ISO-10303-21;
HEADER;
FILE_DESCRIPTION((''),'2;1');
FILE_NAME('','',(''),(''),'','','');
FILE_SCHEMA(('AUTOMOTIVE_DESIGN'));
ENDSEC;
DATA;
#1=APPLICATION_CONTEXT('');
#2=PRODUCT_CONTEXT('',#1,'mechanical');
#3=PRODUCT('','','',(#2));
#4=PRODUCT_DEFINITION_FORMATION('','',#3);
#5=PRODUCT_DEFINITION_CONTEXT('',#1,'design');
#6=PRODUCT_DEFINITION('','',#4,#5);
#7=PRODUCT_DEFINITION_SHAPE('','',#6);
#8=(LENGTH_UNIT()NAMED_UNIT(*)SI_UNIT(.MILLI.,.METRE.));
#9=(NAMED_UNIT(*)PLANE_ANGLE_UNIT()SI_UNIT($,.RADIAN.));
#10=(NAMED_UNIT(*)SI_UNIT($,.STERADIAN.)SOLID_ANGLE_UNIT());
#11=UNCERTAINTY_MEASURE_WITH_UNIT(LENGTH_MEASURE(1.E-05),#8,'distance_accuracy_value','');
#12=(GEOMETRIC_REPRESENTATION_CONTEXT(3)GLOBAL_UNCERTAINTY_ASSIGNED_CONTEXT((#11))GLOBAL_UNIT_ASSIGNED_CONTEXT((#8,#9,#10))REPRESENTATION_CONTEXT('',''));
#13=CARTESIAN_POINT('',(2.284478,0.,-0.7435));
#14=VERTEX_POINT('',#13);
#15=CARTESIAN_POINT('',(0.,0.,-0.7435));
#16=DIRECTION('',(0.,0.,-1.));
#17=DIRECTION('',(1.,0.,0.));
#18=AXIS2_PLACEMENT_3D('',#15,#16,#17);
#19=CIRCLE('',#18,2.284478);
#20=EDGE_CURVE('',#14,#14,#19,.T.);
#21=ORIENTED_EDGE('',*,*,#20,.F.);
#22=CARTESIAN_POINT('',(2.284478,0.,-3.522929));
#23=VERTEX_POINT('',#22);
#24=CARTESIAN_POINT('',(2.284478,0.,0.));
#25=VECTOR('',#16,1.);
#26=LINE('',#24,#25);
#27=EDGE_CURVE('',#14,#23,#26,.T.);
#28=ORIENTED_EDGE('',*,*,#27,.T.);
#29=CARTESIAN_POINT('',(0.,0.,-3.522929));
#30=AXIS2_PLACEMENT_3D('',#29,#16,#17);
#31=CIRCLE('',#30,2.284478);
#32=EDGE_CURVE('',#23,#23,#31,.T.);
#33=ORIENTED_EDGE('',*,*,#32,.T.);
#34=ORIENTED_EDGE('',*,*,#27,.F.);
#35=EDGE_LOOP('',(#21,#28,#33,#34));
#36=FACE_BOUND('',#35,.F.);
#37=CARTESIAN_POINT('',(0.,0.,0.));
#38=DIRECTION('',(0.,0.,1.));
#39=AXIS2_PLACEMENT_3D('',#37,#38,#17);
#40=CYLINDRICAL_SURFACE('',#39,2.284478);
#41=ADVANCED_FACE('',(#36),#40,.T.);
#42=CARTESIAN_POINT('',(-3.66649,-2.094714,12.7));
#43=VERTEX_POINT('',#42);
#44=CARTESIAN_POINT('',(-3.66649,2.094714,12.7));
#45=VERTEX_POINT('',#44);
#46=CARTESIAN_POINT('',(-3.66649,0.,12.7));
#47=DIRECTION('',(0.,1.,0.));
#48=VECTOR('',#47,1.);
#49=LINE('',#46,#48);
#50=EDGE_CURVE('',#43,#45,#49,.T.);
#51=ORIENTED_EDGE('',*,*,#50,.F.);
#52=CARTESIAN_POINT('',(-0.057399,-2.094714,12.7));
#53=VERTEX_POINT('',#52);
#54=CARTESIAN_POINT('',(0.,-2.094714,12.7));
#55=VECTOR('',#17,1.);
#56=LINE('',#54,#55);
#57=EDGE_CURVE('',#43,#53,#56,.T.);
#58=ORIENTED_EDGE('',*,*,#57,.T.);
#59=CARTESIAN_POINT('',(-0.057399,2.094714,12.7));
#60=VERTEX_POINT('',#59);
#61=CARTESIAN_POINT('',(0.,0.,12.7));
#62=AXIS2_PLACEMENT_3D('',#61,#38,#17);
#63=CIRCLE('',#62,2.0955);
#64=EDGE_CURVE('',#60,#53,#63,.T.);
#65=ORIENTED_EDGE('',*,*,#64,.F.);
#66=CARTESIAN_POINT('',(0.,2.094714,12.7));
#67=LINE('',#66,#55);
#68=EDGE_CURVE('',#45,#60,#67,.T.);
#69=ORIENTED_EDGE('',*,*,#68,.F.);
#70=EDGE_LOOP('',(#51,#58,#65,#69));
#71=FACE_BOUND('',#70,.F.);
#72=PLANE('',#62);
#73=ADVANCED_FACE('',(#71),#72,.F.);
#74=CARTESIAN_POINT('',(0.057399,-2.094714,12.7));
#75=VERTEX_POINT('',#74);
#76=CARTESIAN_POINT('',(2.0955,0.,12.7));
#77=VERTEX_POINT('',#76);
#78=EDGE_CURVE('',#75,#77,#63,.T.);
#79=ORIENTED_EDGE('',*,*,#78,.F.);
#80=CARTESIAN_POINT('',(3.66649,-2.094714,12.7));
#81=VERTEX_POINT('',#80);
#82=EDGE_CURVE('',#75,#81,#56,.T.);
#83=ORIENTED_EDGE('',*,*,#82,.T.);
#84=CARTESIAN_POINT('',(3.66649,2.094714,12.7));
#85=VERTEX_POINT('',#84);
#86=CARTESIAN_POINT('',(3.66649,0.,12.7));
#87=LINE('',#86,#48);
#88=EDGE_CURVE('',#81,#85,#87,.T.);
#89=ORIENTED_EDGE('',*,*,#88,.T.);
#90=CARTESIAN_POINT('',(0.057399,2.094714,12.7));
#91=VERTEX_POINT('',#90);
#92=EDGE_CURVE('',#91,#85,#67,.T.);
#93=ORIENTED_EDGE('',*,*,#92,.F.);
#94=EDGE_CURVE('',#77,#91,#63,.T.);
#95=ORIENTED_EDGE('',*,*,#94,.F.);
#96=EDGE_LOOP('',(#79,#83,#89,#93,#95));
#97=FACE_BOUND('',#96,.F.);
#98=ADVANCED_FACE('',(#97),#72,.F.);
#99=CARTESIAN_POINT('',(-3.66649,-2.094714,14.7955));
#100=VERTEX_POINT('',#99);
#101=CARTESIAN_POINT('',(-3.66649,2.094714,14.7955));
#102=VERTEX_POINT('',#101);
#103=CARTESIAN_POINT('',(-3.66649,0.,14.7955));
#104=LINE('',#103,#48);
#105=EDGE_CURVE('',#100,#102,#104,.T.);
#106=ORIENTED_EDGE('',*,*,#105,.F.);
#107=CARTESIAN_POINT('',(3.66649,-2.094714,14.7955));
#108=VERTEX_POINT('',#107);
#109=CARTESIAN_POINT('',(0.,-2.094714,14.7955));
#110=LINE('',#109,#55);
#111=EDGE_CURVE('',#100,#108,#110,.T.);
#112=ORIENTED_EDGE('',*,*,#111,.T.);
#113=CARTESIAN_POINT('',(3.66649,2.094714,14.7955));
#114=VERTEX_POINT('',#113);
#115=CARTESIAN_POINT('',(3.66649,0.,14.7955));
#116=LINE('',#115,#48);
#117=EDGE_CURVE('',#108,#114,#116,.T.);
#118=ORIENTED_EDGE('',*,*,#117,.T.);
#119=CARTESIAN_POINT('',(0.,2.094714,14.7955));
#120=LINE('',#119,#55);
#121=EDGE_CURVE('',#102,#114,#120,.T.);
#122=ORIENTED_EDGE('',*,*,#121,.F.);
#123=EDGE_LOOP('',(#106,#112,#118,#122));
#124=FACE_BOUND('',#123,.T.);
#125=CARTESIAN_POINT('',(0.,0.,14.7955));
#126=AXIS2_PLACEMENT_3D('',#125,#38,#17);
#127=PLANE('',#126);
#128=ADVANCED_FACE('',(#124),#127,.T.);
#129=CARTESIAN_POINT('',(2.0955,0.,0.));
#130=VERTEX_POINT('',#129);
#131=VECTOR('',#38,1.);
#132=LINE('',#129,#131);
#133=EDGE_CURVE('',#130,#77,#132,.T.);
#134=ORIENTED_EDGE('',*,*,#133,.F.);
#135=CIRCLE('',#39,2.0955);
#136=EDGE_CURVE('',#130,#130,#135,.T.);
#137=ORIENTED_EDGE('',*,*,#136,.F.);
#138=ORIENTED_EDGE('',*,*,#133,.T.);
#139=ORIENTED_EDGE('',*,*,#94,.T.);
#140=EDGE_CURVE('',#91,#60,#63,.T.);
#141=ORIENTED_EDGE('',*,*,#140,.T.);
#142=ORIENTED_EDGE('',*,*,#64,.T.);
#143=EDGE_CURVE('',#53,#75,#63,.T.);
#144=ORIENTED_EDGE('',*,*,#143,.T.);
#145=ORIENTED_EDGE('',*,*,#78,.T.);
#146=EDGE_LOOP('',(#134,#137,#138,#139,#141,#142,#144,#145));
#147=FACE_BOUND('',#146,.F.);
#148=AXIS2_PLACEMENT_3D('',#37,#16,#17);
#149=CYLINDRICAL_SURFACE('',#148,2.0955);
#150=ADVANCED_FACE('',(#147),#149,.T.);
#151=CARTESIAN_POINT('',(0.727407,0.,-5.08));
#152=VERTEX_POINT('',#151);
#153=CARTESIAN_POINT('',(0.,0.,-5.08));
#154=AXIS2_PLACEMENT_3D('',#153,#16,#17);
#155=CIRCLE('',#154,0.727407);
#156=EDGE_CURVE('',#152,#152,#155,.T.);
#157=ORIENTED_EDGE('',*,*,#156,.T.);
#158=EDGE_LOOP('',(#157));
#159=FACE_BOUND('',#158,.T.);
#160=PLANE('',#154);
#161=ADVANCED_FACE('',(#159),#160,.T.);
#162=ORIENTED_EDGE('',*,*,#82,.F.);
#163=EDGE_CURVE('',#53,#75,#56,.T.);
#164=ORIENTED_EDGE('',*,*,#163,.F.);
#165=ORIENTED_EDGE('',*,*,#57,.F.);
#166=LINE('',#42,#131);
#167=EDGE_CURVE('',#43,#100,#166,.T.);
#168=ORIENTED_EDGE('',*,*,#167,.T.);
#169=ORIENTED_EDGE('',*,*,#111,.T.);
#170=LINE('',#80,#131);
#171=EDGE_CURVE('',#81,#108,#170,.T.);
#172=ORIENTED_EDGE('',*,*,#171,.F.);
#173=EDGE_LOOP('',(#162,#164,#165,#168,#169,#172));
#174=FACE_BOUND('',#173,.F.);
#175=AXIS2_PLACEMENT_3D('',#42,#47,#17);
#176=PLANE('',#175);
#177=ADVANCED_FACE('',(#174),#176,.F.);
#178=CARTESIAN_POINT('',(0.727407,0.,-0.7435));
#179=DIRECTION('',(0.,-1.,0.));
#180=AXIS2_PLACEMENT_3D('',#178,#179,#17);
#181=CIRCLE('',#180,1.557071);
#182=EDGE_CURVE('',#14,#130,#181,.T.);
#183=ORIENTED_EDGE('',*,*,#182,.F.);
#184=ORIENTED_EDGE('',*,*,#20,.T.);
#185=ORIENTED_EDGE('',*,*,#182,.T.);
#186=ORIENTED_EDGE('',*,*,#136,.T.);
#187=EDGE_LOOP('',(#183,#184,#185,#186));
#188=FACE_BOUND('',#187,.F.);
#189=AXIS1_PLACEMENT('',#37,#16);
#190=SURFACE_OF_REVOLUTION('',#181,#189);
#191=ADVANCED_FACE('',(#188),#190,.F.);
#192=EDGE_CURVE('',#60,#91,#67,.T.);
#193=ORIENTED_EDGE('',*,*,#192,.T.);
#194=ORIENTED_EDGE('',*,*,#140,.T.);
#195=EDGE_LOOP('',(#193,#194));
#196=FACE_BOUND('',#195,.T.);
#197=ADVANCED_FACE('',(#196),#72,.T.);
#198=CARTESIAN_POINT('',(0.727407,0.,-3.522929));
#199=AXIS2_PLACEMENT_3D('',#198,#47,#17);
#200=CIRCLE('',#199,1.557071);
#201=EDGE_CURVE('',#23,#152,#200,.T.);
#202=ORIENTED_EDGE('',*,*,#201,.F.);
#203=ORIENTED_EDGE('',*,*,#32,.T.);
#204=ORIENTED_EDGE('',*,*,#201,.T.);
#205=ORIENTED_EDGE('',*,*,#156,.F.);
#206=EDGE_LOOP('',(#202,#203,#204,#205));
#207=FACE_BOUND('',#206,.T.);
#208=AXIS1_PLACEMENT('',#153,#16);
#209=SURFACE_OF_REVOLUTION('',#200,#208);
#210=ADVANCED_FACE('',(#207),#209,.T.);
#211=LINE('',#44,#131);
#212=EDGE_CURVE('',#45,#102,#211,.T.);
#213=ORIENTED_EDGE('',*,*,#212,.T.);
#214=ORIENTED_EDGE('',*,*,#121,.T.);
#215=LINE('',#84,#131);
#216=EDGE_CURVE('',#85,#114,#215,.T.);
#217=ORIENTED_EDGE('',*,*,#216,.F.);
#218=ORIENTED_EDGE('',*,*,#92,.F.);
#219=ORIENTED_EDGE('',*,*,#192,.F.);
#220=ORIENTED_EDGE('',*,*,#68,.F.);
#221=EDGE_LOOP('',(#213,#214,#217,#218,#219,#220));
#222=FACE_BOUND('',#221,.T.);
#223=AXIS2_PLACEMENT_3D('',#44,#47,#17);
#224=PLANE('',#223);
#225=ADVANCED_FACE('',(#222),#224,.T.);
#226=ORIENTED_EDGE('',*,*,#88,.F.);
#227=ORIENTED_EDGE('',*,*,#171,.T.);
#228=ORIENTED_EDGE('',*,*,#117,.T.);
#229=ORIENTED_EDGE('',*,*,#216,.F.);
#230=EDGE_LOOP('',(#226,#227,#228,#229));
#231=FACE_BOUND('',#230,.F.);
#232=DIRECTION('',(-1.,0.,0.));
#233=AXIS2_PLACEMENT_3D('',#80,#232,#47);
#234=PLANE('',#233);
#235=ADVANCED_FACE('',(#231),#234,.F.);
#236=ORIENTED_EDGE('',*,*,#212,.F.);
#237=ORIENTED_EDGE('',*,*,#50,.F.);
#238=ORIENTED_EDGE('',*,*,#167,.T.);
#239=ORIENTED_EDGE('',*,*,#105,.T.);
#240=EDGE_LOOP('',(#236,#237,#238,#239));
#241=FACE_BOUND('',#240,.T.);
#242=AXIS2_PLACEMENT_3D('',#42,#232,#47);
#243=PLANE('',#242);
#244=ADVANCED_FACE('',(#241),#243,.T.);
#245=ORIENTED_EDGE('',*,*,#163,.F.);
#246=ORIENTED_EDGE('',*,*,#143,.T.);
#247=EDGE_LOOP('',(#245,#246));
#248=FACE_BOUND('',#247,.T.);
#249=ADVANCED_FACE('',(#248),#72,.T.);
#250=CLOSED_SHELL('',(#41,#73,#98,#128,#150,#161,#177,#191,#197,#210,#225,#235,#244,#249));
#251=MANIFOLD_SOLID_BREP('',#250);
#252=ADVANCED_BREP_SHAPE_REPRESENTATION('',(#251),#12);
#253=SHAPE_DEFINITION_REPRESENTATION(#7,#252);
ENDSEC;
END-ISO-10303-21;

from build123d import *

# Parameters (mm, degrees)
F0_R     = 2.0955
F1_DEPTH = 12.7
F2_W     = 7.33298
F2_H     = 4.1894274764
F3_DEPTH = 2.0955
F4_R     = 2.284478014
F4_R_2   = 2.0955
F5_DEPTH = 5.08


# Not quite as in the source:
# - a fillet or chamfer that OpenCascade refuses, or shapes differently, is made with other operations: its cross-section is extruded or revolved along the edge and cut away or added


with BuildPart() as f1:
    # F0 (on Top) → F1 (new body)
    with BuildSketch(Plane.XY):
        Circle(F0_R)
    extrude(amount=F1_DEPTH)

    # F2 (on face) → F3 (join)
    with BuildSketch(Plane.XY.offset(12.7)):
        Rectangle(F2_W, F2_H)
    extrude(amount=F3_DEPTH)

    # F4 (on face) → F5 (join)
    with BuildSketch(Plane(origin=(0, 0, 0), x_dir=(1, 0, 0), z_dir=(0, 0, -1))):
        Circle(F4_R)
        Circle(F4_R_2, mode=Mode.SUBTRACT)
        Circle(F4_R_2)
    extrude(amount=F5_DEPTH)

    # F6: fillet of radius 1.5570711792 on 2 edges, made by hand

    # F6_s1 → F6_t2 (revolve, cut)
    with BuildSketch(Plane.XZ):
        with BuildLine():
            ThreePointArc((2.284478014, -0.7434996627), (2.2364941575, -0.3599294481), (2.0955, 0))
            Line((2.0955, 0), (2.284478014, 0))
            Line((2.284478014, 0), (2.284478014, -0.7434996627))
        make_face()
    revolve(axis=Axis((0, 0, 0), (0, 0, -1)), mode=Mode.SUBTRACT)

    # F6_s3 → F6_t4 (revolve, cut)
    with BuildSketch(Plane.XZ):
        with BuildLine():
            ThreePointArc((2.284478014, -3.5229288208), (1.8284224244, -4.6239444104), (0.7274068348, -5.08))
            Line((0.7274068348, -5.08), (2.284478014, -5.08))
            Line((2.284478014, -5.08), (2.284478014, -3.5229288208))
        make_face()
    revolve(axis=Axis((0, 0, -5.08), (0, 0, -1)), mode=Mode.SUBTRACT)


solid = f1.part
